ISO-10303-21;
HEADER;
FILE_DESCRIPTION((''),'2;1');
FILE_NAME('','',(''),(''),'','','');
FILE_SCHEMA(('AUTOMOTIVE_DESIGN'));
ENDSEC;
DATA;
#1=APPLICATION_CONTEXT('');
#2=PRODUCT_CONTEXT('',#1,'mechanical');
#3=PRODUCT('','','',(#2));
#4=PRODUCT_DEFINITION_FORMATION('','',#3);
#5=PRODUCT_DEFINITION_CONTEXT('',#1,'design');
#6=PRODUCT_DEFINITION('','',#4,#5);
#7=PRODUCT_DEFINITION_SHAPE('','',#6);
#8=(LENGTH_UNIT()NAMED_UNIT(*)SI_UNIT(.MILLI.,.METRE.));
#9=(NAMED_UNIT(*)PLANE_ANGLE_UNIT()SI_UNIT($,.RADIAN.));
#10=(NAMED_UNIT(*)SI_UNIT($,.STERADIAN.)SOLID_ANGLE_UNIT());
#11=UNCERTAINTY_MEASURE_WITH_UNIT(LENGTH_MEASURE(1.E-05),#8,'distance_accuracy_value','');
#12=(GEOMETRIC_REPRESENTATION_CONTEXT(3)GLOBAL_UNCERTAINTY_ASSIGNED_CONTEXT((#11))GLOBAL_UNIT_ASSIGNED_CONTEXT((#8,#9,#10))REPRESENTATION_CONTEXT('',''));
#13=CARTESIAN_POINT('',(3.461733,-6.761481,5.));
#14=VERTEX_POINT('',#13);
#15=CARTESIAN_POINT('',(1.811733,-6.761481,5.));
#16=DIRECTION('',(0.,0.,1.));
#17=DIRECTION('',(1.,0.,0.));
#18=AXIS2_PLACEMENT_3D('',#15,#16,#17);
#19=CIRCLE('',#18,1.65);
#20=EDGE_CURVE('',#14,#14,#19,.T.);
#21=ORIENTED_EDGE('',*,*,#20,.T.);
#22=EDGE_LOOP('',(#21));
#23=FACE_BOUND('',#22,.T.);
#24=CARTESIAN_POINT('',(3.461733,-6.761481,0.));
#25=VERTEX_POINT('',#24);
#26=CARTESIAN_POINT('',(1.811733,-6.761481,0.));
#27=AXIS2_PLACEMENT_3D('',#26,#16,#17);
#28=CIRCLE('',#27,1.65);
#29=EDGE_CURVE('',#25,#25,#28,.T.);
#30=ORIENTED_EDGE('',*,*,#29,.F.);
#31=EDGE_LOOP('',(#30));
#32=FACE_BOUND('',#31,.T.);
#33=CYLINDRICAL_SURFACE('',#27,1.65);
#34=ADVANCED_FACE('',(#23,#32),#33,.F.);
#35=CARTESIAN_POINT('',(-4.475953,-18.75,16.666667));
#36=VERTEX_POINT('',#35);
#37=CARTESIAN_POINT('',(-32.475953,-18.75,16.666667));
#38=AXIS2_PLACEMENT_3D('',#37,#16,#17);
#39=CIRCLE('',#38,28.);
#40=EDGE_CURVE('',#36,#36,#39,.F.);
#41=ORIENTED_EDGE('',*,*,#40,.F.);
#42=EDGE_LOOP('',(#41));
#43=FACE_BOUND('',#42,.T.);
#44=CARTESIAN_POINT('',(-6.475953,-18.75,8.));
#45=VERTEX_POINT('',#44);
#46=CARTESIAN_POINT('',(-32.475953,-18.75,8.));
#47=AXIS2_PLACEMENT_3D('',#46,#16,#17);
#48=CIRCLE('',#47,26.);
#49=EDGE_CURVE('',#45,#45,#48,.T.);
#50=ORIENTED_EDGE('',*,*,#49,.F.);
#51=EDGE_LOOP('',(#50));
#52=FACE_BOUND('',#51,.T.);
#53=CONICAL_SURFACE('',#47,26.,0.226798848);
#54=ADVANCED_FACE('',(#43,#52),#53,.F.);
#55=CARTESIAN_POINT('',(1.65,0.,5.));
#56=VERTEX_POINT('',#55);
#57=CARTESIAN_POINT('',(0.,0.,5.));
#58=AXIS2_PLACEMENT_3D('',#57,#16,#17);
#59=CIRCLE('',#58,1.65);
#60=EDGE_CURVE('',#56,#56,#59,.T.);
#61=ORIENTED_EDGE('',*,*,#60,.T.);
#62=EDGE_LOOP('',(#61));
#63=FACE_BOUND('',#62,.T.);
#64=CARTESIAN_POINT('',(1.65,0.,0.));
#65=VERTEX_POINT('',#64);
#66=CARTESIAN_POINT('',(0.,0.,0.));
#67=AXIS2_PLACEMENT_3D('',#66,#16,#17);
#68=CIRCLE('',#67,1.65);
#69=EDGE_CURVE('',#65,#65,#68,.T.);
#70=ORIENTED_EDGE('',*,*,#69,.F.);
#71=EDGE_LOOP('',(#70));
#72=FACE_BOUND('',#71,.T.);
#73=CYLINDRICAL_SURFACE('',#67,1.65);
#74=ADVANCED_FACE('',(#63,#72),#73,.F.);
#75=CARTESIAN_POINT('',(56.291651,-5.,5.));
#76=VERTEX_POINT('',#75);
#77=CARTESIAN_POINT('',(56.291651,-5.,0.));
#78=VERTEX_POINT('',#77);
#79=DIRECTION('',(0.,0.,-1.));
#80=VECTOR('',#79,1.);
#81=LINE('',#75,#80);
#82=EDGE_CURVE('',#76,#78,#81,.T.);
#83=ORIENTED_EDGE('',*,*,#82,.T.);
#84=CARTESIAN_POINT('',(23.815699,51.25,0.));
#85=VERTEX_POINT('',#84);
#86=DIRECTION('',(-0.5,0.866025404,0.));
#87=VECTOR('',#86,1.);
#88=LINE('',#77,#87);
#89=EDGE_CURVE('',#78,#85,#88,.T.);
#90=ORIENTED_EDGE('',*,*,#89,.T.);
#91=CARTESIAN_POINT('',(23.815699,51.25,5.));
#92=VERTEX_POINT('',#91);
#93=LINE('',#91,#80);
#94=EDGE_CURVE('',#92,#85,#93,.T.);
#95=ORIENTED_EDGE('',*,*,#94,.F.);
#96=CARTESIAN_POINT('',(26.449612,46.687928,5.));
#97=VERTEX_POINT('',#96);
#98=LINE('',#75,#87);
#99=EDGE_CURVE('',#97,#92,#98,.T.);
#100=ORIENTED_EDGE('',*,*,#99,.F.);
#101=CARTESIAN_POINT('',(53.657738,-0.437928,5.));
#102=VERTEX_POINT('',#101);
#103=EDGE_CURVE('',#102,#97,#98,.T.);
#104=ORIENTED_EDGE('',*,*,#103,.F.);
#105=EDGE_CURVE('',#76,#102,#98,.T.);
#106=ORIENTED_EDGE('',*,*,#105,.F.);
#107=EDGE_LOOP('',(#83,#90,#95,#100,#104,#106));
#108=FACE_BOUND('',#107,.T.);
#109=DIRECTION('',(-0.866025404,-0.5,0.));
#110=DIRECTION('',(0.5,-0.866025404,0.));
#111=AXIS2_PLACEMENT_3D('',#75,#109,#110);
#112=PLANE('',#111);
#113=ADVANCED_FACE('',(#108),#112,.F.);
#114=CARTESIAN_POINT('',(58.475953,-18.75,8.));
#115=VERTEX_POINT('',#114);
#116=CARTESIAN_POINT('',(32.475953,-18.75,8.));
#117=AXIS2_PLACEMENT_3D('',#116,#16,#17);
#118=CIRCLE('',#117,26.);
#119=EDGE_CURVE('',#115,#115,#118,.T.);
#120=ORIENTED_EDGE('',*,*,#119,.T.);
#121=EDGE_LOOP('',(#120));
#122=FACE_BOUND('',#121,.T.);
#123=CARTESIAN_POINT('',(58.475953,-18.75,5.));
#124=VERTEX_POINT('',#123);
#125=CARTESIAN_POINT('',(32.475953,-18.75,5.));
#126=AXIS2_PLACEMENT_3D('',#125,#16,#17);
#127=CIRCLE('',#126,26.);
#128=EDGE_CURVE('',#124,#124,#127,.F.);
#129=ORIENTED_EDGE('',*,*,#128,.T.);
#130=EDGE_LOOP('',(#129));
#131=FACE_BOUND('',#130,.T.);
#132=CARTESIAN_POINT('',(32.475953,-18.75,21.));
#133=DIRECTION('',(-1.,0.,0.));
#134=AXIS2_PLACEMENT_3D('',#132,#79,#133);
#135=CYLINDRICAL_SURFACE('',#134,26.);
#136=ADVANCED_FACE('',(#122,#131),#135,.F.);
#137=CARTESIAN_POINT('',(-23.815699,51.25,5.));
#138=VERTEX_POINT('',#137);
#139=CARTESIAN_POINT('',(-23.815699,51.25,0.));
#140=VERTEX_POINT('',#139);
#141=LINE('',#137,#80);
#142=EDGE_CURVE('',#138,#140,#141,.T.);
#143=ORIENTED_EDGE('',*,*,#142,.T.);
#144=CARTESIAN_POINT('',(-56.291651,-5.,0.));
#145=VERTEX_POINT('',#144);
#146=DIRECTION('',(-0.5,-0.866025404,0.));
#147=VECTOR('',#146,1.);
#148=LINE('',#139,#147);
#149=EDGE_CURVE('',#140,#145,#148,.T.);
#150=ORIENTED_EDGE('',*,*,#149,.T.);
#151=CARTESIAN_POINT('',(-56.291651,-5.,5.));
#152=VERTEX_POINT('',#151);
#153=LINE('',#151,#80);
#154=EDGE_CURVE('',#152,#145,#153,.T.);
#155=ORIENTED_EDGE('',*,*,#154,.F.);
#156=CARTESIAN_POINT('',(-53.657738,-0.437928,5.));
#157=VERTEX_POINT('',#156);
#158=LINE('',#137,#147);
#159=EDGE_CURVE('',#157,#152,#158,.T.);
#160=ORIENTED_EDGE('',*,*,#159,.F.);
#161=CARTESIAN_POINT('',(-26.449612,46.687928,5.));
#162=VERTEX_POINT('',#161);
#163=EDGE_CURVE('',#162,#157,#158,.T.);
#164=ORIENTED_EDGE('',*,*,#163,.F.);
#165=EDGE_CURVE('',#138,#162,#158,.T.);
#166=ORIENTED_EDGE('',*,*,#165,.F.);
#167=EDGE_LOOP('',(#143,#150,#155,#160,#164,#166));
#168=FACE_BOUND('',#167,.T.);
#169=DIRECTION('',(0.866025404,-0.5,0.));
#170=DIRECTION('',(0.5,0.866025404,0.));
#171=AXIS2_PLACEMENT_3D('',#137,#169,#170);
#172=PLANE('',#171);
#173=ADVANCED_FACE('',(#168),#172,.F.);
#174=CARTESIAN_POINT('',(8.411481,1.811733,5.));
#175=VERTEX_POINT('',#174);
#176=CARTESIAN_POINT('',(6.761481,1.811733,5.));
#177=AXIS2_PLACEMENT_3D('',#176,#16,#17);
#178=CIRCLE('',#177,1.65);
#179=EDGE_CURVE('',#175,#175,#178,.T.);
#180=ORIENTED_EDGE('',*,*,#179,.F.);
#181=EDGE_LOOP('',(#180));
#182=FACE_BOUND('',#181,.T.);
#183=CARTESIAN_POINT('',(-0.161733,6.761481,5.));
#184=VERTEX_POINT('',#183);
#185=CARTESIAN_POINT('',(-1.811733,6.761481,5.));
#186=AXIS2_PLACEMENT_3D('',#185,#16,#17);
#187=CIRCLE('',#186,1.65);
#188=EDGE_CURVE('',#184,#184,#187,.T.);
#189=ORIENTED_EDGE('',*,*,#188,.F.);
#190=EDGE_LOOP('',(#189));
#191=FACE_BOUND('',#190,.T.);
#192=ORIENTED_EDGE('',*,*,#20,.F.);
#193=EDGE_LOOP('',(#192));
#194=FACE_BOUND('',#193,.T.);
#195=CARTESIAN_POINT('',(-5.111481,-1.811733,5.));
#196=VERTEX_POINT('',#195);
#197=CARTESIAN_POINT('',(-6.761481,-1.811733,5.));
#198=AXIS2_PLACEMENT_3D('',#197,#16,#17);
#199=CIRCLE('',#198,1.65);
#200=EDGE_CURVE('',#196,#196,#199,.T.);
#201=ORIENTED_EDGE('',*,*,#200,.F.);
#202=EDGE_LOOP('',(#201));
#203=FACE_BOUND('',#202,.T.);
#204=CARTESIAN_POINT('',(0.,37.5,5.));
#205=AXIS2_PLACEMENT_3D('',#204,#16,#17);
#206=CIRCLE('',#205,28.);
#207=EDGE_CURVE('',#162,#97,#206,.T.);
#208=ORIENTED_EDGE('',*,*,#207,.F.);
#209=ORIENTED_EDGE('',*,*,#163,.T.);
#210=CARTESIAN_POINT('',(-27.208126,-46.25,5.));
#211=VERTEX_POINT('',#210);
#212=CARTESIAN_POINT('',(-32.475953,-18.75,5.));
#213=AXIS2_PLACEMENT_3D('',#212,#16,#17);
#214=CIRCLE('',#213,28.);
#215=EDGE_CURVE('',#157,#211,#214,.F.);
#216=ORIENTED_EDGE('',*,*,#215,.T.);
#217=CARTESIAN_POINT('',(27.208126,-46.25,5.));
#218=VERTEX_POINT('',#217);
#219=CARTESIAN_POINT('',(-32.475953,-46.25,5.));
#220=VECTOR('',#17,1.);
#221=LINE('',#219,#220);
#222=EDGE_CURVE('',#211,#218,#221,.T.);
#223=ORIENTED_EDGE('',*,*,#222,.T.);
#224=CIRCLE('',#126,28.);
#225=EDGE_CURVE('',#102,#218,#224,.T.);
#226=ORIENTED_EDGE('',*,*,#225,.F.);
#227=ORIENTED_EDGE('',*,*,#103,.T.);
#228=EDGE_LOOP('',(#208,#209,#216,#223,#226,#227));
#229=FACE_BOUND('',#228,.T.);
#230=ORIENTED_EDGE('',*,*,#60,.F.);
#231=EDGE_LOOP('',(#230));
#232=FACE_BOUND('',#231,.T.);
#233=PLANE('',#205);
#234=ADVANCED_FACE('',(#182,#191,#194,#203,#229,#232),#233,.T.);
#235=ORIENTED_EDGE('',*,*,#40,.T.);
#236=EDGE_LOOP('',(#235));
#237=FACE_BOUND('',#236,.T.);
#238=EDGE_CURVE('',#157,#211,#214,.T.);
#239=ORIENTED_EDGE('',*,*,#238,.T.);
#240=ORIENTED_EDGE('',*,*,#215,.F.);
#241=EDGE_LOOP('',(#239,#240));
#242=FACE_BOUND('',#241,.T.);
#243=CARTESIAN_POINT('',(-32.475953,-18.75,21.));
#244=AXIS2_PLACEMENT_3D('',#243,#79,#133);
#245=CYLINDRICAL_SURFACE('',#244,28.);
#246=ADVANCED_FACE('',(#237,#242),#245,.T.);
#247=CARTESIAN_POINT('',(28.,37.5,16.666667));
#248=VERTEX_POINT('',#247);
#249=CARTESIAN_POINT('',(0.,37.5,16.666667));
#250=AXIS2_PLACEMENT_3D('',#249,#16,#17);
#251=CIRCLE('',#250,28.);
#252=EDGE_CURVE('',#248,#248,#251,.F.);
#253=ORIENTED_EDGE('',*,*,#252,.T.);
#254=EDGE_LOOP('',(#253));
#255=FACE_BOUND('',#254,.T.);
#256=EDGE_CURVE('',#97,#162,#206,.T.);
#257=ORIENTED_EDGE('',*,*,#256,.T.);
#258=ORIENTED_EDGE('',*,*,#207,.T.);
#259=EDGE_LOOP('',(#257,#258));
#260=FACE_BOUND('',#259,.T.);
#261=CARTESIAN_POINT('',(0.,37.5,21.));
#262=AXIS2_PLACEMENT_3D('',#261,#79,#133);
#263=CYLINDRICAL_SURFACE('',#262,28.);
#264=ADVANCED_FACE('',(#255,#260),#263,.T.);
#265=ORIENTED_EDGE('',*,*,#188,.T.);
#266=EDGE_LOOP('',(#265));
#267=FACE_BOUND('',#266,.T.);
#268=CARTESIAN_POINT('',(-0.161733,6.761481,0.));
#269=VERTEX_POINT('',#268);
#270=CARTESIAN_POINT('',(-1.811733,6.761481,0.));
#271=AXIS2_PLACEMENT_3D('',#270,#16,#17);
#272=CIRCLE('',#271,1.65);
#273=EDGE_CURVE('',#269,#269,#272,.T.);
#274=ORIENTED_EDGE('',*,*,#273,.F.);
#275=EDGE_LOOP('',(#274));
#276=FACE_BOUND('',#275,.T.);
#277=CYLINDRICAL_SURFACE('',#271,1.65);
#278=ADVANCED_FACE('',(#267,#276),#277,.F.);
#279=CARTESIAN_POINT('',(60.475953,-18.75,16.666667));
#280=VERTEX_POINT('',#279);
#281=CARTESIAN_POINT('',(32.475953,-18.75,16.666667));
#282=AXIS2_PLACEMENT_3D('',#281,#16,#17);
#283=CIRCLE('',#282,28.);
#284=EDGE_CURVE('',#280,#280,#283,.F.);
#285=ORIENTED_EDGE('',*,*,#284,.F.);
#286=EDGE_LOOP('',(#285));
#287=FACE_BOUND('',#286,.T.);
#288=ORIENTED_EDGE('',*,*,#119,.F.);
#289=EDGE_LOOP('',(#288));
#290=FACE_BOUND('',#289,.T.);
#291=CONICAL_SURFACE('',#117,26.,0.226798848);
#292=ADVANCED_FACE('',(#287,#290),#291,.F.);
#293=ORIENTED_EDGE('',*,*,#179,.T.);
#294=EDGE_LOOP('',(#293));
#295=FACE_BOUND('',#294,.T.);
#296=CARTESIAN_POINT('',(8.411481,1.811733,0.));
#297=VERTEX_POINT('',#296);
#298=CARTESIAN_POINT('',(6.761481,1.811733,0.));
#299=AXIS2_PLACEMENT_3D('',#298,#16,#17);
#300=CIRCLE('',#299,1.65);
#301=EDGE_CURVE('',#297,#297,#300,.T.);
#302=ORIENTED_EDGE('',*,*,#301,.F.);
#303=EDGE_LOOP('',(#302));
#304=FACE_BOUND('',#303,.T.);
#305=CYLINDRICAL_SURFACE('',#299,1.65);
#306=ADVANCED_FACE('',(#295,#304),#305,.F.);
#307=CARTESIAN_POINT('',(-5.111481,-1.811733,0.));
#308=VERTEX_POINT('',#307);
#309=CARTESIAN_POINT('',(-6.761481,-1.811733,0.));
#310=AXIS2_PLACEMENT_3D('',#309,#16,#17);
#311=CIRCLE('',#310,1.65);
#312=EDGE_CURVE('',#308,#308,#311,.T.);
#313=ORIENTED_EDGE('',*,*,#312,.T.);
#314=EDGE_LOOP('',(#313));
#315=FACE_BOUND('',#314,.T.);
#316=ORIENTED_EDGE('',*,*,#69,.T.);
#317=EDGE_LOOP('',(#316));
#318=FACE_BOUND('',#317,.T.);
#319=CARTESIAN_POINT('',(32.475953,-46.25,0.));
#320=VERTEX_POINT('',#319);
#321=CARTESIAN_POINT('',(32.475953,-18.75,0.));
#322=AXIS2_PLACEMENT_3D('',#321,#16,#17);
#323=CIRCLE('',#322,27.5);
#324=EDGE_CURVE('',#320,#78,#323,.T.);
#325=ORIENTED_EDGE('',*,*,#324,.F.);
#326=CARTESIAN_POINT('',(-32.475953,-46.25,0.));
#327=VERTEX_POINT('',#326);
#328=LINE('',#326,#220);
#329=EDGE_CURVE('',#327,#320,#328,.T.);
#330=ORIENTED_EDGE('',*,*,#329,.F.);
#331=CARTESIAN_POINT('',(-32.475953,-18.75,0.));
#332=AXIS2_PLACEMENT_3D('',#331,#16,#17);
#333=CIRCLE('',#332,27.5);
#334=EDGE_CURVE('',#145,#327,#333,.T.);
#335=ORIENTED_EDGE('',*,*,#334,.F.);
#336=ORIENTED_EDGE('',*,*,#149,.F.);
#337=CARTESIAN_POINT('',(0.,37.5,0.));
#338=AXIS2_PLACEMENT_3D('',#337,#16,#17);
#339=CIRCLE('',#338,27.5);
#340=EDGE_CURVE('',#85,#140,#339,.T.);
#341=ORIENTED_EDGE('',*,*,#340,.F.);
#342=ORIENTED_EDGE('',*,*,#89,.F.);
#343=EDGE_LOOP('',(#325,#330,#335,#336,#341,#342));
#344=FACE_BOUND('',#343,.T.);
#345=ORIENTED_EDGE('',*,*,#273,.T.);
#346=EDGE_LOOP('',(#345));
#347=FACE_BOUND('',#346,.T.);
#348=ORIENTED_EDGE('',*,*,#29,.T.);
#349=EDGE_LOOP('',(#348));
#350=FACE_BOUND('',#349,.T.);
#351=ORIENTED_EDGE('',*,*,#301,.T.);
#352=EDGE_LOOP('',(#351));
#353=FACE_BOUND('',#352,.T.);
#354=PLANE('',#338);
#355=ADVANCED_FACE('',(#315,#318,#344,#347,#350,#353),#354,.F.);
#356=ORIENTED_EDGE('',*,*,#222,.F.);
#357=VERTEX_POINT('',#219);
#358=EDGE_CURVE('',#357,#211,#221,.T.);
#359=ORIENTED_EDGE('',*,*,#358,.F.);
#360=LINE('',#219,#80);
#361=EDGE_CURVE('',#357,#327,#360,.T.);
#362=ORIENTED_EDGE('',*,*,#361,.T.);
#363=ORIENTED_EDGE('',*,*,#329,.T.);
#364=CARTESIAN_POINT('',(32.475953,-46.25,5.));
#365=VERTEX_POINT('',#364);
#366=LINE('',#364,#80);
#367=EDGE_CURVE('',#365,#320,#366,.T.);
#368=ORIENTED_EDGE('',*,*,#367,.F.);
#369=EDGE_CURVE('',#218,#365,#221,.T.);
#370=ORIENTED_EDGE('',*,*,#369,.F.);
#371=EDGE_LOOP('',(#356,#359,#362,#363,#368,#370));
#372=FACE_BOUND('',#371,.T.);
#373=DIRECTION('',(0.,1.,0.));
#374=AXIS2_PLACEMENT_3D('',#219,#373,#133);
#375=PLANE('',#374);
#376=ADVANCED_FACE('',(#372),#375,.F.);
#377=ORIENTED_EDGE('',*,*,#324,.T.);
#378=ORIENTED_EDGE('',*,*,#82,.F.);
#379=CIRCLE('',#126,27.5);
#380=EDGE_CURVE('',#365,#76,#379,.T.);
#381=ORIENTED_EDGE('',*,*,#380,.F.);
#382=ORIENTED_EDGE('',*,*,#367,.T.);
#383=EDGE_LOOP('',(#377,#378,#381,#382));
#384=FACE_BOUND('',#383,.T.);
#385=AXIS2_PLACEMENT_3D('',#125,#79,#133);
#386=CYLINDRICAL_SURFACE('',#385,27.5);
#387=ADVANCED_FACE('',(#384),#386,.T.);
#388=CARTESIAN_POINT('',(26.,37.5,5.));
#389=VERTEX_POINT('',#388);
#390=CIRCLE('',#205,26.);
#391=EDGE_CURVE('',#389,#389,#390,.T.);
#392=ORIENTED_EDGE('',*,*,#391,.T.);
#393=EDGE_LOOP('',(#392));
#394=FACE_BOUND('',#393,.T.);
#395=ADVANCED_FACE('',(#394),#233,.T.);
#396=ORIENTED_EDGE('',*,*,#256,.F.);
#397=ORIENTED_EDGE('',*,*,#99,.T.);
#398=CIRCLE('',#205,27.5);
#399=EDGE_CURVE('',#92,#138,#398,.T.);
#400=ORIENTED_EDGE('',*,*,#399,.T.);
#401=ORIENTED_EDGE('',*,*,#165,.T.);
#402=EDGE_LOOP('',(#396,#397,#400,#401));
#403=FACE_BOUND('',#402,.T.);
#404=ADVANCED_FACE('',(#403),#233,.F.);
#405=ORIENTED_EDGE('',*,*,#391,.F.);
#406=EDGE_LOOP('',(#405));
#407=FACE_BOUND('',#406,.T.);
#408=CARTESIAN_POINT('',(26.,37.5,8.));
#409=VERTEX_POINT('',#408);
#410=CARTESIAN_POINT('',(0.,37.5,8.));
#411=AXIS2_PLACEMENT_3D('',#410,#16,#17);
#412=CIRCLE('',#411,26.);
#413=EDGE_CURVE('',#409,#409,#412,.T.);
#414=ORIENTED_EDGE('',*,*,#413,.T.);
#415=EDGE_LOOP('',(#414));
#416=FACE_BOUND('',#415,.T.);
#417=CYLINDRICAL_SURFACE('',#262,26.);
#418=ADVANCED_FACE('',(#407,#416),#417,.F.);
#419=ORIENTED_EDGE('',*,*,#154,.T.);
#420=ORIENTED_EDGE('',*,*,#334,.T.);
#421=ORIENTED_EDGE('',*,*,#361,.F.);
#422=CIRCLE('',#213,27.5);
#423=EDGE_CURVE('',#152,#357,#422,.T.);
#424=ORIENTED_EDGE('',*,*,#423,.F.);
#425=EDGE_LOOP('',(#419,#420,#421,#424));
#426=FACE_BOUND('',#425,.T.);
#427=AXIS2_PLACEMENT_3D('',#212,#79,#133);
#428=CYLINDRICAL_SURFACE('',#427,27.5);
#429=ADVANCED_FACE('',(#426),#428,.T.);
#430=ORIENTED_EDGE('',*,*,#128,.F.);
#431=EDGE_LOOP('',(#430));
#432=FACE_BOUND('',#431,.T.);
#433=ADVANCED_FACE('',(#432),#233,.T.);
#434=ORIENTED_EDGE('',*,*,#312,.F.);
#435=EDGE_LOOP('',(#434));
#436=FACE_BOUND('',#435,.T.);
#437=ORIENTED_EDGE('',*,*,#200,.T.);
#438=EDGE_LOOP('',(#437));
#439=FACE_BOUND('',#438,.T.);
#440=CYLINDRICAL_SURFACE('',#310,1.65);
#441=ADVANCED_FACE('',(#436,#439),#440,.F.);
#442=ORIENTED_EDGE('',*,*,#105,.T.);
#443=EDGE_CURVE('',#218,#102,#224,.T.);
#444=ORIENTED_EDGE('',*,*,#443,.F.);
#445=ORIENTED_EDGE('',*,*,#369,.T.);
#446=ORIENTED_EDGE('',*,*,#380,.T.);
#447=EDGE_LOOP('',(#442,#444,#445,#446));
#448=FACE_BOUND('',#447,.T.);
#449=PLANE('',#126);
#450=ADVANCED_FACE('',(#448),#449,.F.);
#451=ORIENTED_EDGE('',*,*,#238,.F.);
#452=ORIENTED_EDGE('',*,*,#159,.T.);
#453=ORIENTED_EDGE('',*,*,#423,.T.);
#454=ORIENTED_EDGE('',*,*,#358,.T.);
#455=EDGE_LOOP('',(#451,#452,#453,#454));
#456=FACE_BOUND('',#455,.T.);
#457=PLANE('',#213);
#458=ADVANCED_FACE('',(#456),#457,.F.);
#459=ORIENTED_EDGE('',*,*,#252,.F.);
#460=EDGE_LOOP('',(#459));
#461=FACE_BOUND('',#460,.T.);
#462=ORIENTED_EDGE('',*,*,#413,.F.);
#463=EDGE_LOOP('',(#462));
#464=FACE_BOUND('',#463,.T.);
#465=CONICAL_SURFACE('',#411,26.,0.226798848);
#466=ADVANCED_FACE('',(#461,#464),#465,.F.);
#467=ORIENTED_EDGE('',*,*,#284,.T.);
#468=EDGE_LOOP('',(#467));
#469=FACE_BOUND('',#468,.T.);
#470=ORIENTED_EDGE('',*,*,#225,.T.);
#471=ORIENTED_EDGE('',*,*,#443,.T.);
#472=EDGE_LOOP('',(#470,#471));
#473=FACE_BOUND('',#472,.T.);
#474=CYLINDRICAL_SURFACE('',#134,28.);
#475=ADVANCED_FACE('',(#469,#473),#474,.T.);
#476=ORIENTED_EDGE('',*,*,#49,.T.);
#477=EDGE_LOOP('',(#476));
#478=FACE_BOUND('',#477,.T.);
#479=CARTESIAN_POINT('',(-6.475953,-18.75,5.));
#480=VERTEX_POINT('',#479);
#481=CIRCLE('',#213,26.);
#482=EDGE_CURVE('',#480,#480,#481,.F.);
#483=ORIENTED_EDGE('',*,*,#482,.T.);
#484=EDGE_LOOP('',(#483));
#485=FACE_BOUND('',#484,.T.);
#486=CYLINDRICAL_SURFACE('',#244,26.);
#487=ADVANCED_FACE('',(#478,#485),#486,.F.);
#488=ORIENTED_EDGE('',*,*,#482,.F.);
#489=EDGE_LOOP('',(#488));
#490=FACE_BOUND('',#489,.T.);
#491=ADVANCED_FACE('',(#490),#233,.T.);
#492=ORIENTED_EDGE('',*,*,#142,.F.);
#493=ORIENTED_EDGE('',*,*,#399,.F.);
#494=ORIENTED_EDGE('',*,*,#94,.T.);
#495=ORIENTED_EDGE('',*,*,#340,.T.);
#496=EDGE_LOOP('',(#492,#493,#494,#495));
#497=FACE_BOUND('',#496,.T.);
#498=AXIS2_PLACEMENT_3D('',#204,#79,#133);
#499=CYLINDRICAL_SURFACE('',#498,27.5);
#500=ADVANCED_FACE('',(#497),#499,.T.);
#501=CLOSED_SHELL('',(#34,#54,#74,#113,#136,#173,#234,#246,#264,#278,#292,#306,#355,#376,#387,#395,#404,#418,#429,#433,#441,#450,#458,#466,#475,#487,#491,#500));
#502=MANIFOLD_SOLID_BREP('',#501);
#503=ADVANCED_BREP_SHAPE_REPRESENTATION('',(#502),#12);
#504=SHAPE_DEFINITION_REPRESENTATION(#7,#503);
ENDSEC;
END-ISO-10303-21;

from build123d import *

# Parameters (mm, degrees)
EXTRUDE_1_DEPTH     = 5
SKETCH_2_R          = 28
SKETCH_2_R_2        = 26
EXTRUDE_2_DEPTH     = 16
SKETCH_3_R          = 1.65
CUT_EXTRUDE_1_DEPTH = 91.573676352
CHAMFER_1_SIZE      = 3
CHAMFER_1_SIZE_2    = 13


with BuildPart() as part:
    # 草图1 → 凸台-拉伸1 (new body)
    with BuildSketch(Plane.XY):
        with BuildLine():
            Line((-23.815698604, 51.25), (-56.291651246, -5))
            ThreePointArc((-56.291651246, -5), (-56.291651246, -32.5), (-32.475952642, -46.25))
            Line((-32.475952642, -46.25), (32.475952642, -46.25))
            ThreePointArc((32.475952642, -46.25), (56.291651246, -32.5), (56.291651246, -5))
            Line((56.291651246, -5), (23.815698604, 51.25))
            ThreePointArc((23.815698604, 51.25), (0, 65), (-23.815698604, 51.25))
        make_face()
    extrude(amount=EXTRUDE_1_DEPTH)

    # 草图2 → 凸台-拉伸2 (add)
    # profile 1 of 3: a face of its own
    with BuildSketch(Plane.XY.offset(5)):
        with Locations(Location((0, 37.5, 0), (0, 0, 160.844062564))):
            Circle(SKETCH_2_R)
        with Locations((0, 37.5)):
            Circle(SKETCH_2_R_2, mode=Mode.SUBTRACT)
    # profile 2 of 3: a face of its own
    with BuildSketch(Plane.XY.offset(5)):
        with Locations(Location((32.475952642, -18.75, 0), (0, 0, 259.155937436))):
            Circle(SKETCH_2_R)
        with Locations((32.475952642, -18.75)):
            Circle(SKETCH_2_R_2, mode=Mode.SUBTRACT)
    # profile 3 of 3: a face of its own
    with BuildSketch(Plane.XY.offset(5)):
        with Locations(Location((-32.475952642, -18.75, 0), (0, 0, 139.155937436))):
            Circle(SKETCH_2_R)
        with Locations((-32.475952642, -18.75)):
            Circle(SKETCH_2_R_2, mode=Mode.SUBTRACT)
    extrude(amount=EXTRUDE_2_DEPTH)

    # 草图3 → 切除-拉伸1 (cut, through all)
    with BuildSketch(Plane.XY.offset(5)):
        Circle(SKETCH_3_R)
        with Locations((-1.811733316, 6.761480784)):
            Circle(SKETCH_3_R)
        with Locations((6.761480784, 1.811733316)):
            Circle(SKETCH_3_R)
        with Locations((1.811733316, -6.761480784)):
            Circle(SKETCH_3_R)
        with Locations((-6.761480784, -1.811733316)):
            Circle(SKETCH_3_R)
    extrude(amount=-CUT_EXTRUDE_1_DEPTH, mode=Mode.SUBTRACT)

    # 倒角1
    # the kernel refuses this chamfer: 13, 3 mm, written as the material it takes off along each edge
    with BuildSketch(Plane(origin=(-32.475952642, -18.75, 21), x_dir=(1, 0, 0), z_dir=(0, -1, 0))) as chamfer_1_piece_1:
        Polygon((26 + CHAMFER_1_SIZE, 0), (26, -CHAMFER_1_SIZE_2), (26, 0), align=None)
    revolve(axis=Axis((-32.475952642, -18.75, 21), (0, 0, 1)), mode=Mode.SUBTRACT)
    with BuildSketch(Plane(origin=(32.475952642, -18.75, 21), x_dir=(1, 0, 0), z_dir=(0, -1, 0))) as chamfer_1_piece_2:
        Polygon((26 + CHAMFER_1_SIZE, 0), (26, -CHAMFER_1_SIZE_2), (26, 0), align=None)
    revolve(axis=Axis((32.475952642, -18.75, 21), (0, 0, 1)), mode=Mode.SUBTRACT)
    with BuildSketch(Plane(origin=(0, 37.5, 21), x_dir=(1, 0, 0), z_dir=(0, -1, 0))) as chamfer_1_piece_3:
        Polygon((26 + CHAMFER_1_SIZE, 0), (26, -CHAMFER_1_SIZE_2), (26, 0), align=None)
    revolve(axis=Axis((0, 37.5, 21), (0, 0, 1)), mode=Mode.SUBTRACT)


solid = part.part
